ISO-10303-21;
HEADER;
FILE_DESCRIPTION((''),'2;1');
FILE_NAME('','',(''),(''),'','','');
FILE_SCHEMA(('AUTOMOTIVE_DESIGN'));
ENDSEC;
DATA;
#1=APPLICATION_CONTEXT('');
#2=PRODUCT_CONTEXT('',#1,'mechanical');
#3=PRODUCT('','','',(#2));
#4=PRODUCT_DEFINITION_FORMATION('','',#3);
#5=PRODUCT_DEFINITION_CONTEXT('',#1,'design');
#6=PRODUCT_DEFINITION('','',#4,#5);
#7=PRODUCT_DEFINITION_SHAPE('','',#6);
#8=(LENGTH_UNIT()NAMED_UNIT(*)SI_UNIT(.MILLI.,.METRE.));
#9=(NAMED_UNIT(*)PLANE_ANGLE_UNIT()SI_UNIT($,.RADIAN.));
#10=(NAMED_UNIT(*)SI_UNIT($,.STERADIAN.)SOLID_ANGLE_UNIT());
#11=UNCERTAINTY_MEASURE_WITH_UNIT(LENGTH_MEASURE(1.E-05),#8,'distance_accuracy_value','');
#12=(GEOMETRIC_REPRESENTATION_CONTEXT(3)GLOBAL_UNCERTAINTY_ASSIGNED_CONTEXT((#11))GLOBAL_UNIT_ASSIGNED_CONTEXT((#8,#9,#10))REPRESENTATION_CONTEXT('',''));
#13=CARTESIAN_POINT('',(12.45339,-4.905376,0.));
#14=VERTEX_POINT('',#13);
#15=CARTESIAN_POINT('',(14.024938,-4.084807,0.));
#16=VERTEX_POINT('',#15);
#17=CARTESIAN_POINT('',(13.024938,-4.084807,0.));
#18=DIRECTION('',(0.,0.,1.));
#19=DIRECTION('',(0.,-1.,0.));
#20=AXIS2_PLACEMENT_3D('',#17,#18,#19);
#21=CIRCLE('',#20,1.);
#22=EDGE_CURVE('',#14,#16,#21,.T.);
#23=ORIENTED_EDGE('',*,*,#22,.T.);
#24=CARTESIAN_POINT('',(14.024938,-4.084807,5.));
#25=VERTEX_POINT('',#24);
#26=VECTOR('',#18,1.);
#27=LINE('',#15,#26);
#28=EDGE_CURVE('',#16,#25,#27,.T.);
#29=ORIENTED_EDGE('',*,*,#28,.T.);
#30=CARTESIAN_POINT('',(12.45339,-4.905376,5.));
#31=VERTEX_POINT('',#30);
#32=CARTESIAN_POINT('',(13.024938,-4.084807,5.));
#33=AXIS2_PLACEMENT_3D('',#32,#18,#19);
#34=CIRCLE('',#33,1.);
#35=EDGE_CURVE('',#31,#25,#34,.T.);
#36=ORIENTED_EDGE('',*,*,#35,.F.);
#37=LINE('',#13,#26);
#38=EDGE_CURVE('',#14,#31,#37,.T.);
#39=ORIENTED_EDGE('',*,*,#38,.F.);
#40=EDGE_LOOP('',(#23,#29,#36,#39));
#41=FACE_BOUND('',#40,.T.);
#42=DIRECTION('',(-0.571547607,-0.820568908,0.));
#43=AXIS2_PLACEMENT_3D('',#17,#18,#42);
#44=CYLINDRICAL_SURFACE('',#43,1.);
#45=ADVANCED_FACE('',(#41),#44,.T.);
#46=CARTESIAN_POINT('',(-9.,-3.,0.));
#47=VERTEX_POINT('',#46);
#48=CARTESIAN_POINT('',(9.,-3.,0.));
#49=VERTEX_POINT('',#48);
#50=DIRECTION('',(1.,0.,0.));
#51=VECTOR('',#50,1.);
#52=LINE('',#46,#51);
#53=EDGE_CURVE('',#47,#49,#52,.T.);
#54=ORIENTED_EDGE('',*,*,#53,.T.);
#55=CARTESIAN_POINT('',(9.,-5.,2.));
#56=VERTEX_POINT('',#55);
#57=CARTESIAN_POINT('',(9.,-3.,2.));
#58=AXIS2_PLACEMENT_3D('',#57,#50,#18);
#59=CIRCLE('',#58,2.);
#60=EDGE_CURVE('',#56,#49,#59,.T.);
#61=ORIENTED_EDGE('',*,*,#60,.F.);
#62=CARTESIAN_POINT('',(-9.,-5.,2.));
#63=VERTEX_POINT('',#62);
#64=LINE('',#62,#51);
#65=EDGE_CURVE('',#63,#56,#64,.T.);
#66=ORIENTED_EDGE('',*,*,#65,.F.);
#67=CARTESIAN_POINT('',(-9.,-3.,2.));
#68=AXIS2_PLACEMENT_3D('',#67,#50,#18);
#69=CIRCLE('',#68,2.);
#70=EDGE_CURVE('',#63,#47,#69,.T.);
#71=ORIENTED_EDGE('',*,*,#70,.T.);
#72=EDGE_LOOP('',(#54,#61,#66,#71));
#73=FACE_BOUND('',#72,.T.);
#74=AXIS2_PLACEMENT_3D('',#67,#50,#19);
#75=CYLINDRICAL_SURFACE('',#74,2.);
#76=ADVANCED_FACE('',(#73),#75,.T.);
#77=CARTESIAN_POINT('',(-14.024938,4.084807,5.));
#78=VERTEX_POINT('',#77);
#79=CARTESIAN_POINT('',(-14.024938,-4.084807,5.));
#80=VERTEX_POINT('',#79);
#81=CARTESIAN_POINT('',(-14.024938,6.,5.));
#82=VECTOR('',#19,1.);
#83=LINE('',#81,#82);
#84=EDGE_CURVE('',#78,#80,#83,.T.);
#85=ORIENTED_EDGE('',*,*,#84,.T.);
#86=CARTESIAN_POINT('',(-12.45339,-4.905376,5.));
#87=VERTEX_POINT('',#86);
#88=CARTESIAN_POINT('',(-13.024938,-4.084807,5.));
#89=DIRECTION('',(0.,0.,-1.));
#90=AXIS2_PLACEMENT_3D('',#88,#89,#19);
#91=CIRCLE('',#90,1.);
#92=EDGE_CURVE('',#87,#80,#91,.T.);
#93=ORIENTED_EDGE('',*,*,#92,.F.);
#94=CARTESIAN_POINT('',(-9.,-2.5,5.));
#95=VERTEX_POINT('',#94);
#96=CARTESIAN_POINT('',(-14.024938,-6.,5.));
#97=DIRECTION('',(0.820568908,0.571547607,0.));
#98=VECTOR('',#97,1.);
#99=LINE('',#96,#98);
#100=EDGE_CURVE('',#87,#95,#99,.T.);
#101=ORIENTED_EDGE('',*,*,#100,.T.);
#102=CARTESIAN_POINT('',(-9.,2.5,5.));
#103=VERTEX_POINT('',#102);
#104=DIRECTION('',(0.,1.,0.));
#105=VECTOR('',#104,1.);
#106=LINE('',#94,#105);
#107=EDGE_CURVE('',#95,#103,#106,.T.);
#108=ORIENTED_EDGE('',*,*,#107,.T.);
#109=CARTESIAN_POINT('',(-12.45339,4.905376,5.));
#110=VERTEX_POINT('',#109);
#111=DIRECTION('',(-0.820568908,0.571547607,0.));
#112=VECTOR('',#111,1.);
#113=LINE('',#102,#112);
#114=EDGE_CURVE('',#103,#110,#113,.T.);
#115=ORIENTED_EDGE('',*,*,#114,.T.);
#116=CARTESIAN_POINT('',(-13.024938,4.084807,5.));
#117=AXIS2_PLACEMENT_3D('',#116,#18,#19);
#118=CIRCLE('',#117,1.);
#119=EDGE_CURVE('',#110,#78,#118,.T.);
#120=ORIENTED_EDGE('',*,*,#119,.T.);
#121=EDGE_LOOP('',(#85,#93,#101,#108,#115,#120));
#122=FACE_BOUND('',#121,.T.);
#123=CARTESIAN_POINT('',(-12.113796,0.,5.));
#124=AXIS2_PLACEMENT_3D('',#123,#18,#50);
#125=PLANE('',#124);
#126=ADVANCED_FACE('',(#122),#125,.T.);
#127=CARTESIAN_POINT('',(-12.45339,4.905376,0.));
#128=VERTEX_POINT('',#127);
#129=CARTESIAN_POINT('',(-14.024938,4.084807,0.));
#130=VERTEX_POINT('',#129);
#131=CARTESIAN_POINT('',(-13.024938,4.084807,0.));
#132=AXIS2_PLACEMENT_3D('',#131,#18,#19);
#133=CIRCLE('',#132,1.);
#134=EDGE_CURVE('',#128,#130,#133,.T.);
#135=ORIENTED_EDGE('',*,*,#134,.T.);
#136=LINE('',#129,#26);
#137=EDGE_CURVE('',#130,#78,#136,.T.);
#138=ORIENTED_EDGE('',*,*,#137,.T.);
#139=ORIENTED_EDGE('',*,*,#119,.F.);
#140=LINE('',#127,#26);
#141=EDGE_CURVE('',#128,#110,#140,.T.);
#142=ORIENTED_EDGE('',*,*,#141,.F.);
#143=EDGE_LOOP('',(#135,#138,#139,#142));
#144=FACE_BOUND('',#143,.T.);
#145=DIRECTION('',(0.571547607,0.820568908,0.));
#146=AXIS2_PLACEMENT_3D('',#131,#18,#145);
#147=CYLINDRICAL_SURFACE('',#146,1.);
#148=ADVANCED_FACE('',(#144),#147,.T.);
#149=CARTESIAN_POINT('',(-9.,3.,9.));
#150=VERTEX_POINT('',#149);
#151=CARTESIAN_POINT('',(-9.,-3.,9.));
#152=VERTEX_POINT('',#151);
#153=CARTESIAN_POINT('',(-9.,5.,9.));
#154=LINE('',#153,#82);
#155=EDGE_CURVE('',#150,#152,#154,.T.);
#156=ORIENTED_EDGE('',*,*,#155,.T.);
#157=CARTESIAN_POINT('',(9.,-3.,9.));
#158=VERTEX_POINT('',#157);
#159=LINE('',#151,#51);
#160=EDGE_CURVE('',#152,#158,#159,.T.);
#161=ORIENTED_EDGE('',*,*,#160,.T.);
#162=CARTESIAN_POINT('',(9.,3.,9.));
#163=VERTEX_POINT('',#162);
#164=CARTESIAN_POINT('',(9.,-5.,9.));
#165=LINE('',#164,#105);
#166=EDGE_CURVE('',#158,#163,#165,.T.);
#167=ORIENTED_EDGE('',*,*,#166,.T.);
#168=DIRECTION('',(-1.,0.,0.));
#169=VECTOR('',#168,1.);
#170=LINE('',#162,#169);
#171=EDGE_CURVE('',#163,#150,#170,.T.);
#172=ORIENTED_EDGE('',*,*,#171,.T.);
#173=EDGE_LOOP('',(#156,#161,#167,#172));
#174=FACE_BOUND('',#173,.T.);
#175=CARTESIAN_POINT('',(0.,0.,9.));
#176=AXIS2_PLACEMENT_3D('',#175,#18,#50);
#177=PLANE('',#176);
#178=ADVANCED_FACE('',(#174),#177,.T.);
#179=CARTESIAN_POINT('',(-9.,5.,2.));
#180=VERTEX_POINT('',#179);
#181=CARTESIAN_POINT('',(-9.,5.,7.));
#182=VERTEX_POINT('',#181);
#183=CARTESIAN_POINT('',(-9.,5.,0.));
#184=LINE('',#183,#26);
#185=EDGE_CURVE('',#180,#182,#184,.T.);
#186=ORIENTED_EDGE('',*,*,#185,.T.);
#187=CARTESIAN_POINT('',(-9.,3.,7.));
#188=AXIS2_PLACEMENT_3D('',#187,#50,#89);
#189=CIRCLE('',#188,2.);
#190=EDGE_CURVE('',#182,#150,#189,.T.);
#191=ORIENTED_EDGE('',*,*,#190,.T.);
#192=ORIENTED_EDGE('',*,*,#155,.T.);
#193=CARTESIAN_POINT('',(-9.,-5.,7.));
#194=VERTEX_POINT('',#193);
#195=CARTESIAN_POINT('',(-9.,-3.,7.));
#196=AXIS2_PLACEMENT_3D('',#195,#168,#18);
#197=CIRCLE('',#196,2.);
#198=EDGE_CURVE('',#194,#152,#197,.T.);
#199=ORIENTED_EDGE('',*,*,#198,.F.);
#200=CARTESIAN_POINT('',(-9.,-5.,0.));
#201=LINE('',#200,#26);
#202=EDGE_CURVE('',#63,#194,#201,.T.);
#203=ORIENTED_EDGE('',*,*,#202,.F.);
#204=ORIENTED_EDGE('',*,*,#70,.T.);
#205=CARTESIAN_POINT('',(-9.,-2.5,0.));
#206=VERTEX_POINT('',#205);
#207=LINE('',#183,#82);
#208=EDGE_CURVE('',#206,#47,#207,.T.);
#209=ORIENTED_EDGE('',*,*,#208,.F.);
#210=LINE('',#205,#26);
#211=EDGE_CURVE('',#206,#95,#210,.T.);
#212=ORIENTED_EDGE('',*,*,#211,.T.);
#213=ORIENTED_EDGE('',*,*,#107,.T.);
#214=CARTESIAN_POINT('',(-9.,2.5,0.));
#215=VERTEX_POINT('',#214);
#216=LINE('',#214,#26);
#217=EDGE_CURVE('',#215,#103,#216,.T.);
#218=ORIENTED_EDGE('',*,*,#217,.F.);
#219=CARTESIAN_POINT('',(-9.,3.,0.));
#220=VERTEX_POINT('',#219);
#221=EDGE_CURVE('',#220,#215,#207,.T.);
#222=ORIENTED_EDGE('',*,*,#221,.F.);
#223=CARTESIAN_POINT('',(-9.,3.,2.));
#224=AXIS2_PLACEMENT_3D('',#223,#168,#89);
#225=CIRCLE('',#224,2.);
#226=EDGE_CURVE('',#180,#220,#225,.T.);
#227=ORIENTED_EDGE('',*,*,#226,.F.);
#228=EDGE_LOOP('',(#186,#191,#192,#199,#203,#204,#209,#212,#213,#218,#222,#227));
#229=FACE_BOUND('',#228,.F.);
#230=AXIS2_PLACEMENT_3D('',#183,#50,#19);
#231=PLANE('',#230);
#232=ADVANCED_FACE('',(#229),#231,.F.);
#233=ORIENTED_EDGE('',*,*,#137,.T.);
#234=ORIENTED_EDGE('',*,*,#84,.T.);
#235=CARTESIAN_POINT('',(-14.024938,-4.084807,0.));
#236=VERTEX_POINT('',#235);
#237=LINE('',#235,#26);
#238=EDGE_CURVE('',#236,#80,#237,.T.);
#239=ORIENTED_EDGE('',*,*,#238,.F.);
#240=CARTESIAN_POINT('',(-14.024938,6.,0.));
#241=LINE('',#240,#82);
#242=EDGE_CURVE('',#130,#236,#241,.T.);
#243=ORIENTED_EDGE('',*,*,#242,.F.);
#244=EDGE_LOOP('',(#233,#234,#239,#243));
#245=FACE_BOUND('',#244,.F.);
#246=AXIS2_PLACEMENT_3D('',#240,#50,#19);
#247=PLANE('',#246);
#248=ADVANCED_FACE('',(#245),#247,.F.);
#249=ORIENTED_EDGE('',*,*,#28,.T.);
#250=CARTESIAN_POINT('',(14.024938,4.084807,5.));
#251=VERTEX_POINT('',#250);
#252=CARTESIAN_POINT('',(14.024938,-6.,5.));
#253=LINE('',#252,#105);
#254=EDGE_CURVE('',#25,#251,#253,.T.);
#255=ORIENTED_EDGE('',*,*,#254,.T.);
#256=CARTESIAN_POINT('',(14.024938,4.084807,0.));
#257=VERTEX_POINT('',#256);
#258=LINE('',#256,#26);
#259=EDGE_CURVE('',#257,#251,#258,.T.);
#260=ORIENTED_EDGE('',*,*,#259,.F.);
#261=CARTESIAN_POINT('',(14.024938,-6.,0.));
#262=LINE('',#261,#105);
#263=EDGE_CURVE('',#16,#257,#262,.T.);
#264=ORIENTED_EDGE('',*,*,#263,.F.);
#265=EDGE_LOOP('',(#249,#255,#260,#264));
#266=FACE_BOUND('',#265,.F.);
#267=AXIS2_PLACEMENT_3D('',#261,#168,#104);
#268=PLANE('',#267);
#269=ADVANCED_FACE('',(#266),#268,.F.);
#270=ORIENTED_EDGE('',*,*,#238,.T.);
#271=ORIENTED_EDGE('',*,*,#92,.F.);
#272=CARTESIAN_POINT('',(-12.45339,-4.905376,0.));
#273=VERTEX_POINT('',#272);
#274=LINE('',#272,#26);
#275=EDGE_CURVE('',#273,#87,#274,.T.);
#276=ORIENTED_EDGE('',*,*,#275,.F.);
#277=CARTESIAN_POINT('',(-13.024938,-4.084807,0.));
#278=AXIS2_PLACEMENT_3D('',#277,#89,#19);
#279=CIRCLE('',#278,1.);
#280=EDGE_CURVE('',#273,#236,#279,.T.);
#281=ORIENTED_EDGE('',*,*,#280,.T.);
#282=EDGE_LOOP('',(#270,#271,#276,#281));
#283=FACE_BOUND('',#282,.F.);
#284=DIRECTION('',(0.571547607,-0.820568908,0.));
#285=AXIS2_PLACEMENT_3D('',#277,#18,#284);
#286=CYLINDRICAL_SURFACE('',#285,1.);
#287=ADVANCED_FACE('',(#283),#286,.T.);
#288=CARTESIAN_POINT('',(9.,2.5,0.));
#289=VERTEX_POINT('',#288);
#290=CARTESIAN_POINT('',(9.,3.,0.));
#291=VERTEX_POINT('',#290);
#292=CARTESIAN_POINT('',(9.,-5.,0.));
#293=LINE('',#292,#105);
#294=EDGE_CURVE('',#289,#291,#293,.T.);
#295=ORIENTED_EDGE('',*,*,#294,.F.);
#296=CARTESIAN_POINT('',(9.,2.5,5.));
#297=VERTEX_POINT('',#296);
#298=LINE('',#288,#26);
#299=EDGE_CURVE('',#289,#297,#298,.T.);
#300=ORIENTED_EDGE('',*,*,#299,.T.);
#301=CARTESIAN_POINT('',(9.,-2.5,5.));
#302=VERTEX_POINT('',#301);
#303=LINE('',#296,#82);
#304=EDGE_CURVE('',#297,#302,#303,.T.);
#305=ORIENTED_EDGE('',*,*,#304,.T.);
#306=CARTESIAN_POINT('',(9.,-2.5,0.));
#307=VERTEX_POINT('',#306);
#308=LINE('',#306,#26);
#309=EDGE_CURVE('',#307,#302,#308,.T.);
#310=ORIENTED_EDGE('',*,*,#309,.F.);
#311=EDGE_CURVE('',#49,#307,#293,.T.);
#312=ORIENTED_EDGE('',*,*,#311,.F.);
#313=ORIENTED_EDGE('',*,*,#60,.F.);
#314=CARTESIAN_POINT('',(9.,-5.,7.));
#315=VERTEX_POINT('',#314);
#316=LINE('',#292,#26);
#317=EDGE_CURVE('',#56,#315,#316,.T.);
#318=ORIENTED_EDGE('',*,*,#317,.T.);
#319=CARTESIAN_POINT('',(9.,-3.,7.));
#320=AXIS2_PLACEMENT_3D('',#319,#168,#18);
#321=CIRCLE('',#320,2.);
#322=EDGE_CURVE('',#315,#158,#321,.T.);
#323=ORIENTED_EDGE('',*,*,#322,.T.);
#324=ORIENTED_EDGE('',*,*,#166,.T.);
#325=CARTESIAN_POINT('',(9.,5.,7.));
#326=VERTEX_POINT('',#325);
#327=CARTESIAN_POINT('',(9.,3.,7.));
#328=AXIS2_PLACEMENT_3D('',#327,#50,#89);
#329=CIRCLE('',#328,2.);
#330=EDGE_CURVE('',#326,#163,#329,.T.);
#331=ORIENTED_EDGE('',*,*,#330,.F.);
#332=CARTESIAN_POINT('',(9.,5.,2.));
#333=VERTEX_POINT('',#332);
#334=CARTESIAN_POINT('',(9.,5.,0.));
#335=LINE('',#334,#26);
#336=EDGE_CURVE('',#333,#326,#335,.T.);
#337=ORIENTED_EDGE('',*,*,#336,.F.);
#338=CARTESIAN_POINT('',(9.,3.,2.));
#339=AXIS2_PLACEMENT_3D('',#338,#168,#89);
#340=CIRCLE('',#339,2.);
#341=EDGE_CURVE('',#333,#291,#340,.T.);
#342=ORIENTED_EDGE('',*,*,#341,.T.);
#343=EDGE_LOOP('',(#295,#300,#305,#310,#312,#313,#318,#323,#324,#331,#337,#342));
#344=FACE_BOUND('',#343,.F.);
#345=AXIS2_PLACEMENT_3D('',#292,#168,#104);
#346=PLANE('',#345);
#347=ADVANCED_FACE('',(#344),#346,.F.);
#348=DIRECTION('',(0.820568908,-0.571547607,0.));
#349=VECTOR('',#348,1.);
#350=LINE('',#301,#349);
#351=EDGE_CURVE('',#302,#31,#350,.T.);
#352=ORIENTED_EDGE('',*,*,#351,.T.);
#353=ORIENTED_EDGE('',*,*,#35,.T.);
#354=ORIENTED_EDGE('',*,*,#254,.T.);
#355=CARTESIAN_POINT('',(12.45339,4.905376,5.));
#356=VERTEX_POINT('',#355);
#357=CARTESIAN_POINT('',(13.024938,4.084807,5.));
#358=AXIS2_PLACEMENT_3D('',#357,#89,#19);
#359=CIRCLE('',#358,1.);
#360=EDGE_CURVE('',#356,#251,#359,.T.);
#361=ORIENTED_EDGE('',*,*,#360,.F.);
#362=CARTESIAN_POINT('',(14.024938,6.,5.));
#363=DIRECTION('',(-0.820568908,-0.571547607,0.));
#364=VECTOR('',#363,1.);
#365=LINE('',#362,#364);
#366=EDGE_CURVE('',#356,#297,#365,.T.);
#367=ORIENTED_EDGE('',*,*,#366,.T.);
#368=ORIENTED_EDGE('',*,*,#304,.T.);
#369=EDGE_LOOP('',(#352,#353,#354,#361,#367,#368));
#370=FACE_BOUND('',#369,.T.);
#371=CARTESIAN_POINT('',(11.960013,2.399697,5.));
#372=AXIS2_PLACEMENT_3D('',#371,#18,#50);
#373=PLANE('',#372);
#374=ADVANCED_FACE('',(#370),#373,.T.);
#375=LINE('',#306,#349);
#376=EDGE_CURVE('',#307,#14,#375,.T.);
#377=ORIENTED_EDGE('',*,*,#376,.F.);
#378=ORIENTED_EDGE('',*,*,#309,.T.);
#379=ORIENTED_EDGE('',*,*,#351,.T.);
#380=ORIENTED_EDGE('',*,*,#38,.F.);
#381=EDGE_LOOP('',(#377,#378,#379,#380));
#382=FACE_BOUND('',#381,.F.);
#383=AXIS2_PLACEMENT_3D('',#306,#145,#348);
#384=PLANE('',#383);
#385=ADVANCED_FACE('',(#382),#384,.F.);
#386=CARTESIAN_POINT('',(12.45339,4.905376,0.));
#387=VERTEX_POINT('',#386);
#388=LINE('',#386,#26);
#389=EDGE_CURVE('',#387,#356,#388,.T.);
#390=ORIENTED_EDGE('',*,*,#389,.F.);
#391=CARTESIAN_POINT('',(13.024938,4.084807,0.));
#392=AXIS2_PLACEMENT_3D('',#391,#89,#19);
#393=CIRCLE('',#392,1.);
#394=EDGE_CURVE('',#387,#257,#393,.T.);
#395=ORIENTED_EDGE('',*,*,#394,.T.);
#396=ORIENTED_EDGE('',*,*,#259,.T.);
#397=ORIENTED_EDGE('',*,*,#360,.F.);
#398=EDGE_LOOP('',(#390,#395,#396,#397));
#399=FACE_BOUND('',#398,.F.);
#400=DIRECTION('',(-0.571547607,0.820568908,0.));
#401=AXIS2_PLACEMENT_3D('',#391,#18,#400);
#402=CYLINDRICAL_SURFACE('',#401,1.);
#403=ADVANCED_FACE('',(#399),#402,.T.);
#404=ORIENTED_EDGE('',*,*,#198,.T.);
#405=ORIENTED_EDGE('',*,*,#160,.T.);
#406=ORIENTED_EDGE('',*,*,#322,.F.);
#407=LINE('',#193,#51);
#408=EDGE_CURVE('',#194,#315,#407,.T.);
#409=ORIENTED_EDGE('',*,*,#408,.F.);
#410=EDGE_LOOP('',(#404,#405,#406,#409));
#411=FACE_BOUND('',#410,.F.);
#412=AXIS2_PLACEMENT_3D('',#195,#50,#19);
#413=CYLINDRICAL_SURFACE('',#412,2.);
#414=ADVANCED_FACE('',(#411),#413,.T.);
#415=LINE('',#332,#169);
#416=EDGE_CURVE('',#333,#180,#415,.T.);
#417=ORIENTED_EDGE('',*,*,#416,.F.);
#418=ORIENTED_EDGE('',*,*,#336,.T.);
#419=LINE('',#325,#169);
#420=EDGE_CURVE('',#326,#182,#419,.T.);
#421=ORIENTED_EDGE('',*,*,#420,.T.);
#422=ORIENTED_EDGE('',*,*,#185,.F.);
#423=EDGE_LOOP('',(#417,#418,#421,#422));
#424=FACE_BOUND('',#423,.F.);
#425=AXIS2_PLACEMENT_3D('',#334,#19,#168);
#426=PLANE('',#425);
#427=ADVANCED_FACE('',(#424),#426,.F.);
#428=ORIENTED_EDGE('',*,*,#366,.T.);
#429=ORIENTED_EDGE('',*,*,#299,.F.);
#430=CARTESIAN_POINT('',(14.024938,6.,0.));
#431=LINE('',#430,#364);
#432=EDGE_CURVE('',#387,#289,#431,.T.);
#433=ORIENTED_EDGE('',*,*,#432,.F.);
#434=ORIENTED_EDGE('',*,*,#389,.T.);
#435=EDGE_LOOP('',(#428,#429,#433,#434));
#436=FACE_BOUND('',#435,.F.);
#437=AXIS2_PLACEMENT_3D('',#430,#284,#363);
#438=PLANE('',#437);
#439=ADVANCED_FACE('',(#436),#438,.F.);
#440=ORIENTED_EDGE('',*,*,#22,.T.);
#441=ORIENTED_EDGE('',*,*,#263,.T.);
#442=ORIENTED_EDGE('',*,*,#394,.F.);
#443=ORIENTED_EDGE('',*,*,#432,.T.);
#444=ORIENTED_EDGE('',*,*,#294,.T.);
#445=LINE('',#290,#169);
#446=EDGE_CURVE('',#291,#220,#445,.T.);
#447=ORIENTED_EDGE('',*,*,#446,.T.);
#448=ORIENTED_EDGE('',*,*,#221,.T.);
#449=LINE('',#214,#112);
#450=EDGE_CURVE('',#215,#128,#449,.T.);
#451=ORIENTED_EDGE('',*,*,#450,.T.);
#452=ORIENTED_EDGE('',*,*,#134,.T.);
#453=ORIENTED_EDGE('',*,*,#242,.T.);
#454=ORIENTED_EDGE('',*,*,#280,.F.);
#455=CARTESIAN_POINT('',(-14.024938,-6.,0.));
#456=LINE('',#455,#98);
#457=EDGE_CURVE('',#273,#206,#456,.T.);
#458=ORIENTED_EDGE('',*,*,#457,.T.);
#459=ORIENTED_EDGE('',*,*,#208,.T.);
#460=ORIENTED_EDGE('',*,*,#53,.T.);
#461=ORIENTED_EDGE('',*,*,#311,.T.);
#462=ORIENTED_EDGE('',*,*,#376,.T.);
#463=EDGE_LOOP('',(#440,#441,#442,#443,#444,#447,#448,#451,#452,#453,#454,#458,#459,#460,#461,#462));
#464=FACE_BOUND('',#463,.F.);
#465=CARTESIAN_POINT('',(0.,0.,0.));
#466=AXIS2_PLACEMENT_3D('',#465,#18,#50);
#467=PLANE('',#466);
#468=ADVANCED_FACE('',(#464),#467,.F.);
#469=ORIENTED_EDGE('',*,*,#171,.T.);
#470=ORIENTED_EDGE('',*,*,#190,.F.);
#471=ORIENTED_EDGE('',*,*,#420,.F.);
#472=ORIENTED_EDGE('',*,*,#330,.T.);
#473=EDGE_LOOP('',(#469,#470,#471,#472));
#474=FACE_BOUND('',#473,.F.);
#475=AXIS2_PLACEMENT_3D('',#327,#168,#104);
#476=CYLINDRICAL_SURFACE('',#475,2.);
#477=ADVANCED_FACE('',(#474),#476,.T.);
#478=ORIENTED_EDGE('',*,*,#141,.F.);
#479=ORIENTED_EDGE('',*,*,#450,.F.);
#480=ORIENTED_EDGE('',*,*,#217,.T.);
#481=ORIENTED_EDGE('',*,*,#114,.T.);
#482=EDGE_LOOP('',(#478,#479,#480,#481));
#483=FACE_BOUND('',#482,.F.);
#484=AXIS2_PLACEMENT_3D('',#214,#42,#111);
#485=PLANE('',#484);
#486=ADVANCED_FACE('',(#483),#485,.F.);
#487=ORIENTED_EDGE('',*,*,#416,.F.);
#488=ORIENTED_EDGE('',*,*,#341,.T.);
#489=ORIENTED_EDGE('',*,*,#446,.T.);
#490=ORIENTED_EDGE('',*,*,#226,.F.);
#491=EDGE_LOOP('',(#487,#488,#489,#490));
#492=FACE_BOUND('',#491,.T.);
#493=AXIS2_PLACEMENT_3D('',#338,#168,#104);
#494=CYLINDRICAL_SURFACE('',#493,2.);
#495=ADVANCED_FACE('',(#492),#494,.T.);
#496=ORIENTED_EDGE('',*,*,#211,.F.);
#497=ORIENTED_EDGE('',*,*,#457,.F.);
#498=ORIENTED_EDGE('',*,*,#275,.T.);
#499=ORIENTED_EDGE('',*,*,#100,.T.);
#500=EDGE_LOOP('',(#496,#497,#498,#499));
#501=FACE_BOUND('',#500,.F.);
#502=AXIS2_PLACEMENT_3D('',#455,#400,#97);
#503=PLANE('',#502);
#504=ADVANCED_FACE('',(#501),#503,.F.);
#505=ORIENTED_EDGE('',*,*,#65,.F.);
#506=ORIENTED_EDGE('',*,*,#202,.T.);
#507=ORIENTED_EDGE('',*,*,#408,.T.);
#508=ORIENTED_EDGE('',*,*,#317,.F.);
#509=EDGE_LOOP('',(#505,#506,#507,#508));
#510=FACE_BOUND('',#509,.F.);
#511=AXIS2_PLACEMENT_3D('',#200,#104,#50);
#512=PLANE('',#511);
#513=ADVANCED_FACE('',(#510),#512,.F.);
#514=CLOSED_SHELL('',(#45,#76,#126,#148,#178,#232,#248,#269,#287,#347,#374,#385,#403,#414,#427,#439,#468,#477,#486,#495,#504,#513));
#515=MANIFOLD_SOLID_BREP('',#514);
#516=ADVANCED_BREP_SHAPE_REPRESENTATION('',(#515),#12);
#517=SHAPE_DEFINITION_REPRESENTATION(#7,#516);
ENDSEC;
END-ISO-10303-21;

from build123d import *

# Parameters (mm, degrees)
F1_DEPTH = 9
F2_R     = 2
F3_DEPTH = 5
F4_R     = 1


with BuildPart() as f1:
    # F0 (on Top) → F1 (new body)
    with BuildSketch(Plane.XY):
        Polygon((9, 5), (0, 5), (-9, 5), (-9, 2.5), (-9, -2.5), (-9, -5), (0, -5), (9, -5), (9, -2.5), (9, 0), (9, 2.5), align=None)
    extrude(amount=F1_DEPTH)

    # F2
    f2_edges = [f1.edges().sort_by_distance(p)[0] for p in [
        (0, -5, 9),
        (0, 5, 9),
        (0, 5, 0),
        (0, -5, 0),
    ]]
    fillet(f2_edges, radius=F2_R)

    # F0 (on Top) → F3 (join)
    with BuildSketch(Plane.XY):
        Polygon((14.0249378106, 6), (9, 2.5), (9, 0), (14.0249378106, 0), align=None)
        Polygon((14.0249378106, 0), (9, 0), (9, -2.5), (14.0249378106, -6), align=None)
        Polygon((-9, -2.5), (-9, 2.5), (-14.0249378106, 6), (-14.0249378106, -6), align=None)
    extrude(amount=F3_DEPTH)

    # F4
    f4_edges = [f1.edges().sort_by_distance(p)[0] for p in [
        (-14.024938, 6, 2.5),
        (-14.024938, -6, 2.5),
        (14.024938, -6, 2.5),
        (14.024938, 6, 2.5),
    ]]
    fillet(f4_edges, radius=F4_R)


solid = f1.part
